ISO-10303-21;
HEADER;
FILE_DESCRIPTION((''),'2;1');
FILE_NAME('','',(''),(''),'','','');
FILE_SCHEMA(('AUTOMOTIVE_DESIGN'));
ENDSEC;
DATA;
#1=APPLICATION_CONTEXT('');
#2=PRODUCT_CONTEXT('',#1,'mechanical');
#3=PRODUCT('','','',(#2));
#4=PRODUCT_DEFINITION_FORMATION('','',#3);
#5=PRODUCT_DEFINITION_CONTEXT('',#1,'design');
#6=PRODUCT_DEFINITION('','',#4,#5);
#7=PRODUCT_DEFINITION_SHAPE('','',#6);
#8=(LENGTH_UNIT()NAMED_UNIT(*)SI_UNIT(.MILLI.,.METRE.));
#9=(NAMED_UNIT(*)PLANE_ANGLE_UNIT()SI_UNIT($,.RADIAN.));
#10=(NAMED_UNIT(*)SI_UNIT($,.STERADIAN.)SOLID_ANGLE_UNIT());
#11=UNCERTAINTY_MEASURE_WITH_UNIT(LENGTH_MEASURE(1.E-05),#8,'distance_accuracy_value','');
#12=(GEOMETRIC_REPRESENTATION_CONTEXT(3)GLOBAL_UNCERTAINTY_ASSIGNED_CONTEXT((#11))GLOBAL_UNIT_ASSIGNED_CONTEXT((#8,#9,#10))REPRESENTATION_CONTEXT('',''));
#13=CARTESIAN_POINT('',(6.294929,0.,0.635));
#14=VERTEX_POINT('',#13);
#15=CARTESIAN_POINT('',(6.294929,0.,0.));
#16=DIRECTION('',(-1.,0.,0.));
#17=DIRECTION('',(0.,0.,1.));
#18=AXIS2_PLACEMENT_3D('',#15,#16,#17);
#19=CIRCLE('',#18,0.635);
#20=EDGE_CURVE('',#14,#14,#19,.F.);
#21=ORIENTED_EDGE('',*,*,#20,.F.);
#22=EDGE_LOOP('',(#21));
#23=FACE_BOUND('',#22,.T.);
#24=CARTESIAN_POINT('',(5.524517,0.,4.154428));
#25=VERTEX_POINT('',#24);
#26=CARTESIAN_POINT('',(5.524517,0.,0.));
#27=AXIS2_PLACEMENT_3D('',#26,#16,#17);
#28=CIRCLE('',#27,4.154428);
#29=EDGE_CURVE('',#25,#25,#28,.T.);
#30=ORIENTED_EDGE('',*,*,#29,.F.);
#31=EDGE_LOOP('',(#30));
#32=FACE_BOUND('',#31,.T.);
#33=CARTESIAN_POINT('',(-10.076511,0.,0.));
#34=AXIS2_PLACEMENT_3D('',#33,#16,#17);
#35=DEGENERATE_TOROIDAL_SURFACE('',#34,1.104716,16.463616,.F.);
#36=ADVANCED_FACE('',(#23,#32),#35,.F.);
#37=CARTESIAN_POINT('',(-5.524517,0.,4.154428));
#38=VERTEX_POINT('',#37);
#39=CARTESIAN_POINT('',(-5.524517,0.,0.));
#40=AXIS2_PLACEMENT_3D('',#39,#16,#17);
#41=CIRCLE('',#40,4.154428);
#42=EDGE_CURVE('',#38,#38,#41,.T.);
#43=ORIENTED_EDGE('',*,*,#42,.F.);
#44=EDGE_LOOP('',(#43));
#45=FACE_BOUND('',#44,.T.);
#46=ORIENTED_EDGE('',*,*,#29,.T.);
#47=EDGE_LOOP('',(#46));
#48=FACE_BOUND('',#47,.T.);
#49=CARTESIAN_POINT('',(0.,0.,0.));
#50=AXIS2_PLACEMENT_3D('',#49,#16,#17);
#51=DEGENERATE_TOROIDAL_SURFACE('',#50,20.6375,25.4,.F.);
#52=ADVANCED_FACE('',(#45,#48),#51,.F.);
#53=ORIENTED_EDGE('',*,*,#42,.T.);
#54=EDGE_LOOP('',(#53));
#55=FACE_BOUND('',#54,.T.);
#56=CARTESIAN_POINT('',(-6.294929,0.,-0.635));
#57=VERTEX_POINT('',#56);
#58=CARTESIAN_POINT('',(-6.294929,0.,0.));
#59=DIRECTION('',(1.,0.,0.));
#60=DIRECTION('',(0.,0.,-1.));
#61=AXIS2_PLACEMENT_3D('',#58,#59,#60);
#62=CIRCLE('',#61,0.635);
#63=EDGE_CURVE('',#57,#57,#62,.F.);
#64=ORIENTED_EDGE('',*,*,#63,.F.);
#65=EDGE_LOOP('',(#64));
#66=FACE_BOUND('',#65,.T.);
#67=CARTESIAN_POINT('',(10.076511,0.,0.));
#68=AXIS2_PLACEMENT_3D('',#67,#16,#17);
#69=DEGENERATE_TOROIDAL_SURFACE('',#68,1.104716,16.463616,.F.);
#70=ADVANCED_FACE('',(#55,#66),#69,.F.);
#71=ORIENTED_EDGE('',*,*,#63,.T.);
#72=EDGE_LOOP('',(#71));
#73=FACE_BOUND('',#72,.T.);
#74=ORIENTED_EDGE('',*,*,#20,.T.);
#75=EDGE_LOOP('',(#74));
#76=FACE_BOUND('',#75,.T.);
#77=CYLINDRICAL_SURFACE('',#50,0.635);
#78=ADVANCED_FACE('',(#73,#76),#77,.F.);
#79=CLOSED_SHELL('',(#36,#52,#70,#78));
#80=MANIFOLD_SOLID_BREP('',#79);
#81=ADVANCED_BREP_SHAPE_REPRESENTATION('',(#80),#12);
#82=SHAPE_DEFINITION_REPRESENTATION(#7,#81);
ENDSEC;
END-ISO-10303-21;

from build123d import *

# Parameters (mm, degrees)
CUT_EXTRUDE1_START     = -6.3500001
CUT_EXTRUDE1_OUTLINE_R = 0.635
CUT_EXTRUDE1_DEPTH     = 12.7000002


# Read off the part's stored shape, not the designer's step: Cut-Extrude1
with BuildPart() as part:
    # Sketch1 → Revolve1 (revolve)
    with BuildSketch(Plane(origin=(0, 0, 0), x_dir=(1, 0, 0), z_dir=(0, 1, 0)), mode=Mode.PRIVATE) as revolve1_sk:
        with BuildLine():
            Line((-6.35, 0), (6.35, 0))
            ThreePointArc((6.35, 0), (6.071418462, 2.103871805), (5.524516579, 4.154428456))
            ThreePointArc((5.524516579, 4.154428456), (0, 4.7625), (-5.524516579, 4.154428456))
            ThreePointArc((-5.524516579, 4.154428456), (-6.071418462, 2.103871805), (-6.35, 0))
        make_face()
    revolve(revolve1_sk.sketch.rotate(Axis((-6.35, 0, 0), (1, 0, 0)), 180), axis=Axis((-6.35, 0, 0), (1, 0, 0)))

    # Cut-Extrude1 outline → Cut-Extrude1 (cut)
    with BuildSketch(Plane.YZ.offset(CUT_EXTRUDE1_START)):
        Circle(CUT_EXTRUDE1_OUTLINE_R)
    extrude(amount=CUT_EXTRUDE1_DEPTH, mode=Mode.SUBTRACT)


solid = part.part
